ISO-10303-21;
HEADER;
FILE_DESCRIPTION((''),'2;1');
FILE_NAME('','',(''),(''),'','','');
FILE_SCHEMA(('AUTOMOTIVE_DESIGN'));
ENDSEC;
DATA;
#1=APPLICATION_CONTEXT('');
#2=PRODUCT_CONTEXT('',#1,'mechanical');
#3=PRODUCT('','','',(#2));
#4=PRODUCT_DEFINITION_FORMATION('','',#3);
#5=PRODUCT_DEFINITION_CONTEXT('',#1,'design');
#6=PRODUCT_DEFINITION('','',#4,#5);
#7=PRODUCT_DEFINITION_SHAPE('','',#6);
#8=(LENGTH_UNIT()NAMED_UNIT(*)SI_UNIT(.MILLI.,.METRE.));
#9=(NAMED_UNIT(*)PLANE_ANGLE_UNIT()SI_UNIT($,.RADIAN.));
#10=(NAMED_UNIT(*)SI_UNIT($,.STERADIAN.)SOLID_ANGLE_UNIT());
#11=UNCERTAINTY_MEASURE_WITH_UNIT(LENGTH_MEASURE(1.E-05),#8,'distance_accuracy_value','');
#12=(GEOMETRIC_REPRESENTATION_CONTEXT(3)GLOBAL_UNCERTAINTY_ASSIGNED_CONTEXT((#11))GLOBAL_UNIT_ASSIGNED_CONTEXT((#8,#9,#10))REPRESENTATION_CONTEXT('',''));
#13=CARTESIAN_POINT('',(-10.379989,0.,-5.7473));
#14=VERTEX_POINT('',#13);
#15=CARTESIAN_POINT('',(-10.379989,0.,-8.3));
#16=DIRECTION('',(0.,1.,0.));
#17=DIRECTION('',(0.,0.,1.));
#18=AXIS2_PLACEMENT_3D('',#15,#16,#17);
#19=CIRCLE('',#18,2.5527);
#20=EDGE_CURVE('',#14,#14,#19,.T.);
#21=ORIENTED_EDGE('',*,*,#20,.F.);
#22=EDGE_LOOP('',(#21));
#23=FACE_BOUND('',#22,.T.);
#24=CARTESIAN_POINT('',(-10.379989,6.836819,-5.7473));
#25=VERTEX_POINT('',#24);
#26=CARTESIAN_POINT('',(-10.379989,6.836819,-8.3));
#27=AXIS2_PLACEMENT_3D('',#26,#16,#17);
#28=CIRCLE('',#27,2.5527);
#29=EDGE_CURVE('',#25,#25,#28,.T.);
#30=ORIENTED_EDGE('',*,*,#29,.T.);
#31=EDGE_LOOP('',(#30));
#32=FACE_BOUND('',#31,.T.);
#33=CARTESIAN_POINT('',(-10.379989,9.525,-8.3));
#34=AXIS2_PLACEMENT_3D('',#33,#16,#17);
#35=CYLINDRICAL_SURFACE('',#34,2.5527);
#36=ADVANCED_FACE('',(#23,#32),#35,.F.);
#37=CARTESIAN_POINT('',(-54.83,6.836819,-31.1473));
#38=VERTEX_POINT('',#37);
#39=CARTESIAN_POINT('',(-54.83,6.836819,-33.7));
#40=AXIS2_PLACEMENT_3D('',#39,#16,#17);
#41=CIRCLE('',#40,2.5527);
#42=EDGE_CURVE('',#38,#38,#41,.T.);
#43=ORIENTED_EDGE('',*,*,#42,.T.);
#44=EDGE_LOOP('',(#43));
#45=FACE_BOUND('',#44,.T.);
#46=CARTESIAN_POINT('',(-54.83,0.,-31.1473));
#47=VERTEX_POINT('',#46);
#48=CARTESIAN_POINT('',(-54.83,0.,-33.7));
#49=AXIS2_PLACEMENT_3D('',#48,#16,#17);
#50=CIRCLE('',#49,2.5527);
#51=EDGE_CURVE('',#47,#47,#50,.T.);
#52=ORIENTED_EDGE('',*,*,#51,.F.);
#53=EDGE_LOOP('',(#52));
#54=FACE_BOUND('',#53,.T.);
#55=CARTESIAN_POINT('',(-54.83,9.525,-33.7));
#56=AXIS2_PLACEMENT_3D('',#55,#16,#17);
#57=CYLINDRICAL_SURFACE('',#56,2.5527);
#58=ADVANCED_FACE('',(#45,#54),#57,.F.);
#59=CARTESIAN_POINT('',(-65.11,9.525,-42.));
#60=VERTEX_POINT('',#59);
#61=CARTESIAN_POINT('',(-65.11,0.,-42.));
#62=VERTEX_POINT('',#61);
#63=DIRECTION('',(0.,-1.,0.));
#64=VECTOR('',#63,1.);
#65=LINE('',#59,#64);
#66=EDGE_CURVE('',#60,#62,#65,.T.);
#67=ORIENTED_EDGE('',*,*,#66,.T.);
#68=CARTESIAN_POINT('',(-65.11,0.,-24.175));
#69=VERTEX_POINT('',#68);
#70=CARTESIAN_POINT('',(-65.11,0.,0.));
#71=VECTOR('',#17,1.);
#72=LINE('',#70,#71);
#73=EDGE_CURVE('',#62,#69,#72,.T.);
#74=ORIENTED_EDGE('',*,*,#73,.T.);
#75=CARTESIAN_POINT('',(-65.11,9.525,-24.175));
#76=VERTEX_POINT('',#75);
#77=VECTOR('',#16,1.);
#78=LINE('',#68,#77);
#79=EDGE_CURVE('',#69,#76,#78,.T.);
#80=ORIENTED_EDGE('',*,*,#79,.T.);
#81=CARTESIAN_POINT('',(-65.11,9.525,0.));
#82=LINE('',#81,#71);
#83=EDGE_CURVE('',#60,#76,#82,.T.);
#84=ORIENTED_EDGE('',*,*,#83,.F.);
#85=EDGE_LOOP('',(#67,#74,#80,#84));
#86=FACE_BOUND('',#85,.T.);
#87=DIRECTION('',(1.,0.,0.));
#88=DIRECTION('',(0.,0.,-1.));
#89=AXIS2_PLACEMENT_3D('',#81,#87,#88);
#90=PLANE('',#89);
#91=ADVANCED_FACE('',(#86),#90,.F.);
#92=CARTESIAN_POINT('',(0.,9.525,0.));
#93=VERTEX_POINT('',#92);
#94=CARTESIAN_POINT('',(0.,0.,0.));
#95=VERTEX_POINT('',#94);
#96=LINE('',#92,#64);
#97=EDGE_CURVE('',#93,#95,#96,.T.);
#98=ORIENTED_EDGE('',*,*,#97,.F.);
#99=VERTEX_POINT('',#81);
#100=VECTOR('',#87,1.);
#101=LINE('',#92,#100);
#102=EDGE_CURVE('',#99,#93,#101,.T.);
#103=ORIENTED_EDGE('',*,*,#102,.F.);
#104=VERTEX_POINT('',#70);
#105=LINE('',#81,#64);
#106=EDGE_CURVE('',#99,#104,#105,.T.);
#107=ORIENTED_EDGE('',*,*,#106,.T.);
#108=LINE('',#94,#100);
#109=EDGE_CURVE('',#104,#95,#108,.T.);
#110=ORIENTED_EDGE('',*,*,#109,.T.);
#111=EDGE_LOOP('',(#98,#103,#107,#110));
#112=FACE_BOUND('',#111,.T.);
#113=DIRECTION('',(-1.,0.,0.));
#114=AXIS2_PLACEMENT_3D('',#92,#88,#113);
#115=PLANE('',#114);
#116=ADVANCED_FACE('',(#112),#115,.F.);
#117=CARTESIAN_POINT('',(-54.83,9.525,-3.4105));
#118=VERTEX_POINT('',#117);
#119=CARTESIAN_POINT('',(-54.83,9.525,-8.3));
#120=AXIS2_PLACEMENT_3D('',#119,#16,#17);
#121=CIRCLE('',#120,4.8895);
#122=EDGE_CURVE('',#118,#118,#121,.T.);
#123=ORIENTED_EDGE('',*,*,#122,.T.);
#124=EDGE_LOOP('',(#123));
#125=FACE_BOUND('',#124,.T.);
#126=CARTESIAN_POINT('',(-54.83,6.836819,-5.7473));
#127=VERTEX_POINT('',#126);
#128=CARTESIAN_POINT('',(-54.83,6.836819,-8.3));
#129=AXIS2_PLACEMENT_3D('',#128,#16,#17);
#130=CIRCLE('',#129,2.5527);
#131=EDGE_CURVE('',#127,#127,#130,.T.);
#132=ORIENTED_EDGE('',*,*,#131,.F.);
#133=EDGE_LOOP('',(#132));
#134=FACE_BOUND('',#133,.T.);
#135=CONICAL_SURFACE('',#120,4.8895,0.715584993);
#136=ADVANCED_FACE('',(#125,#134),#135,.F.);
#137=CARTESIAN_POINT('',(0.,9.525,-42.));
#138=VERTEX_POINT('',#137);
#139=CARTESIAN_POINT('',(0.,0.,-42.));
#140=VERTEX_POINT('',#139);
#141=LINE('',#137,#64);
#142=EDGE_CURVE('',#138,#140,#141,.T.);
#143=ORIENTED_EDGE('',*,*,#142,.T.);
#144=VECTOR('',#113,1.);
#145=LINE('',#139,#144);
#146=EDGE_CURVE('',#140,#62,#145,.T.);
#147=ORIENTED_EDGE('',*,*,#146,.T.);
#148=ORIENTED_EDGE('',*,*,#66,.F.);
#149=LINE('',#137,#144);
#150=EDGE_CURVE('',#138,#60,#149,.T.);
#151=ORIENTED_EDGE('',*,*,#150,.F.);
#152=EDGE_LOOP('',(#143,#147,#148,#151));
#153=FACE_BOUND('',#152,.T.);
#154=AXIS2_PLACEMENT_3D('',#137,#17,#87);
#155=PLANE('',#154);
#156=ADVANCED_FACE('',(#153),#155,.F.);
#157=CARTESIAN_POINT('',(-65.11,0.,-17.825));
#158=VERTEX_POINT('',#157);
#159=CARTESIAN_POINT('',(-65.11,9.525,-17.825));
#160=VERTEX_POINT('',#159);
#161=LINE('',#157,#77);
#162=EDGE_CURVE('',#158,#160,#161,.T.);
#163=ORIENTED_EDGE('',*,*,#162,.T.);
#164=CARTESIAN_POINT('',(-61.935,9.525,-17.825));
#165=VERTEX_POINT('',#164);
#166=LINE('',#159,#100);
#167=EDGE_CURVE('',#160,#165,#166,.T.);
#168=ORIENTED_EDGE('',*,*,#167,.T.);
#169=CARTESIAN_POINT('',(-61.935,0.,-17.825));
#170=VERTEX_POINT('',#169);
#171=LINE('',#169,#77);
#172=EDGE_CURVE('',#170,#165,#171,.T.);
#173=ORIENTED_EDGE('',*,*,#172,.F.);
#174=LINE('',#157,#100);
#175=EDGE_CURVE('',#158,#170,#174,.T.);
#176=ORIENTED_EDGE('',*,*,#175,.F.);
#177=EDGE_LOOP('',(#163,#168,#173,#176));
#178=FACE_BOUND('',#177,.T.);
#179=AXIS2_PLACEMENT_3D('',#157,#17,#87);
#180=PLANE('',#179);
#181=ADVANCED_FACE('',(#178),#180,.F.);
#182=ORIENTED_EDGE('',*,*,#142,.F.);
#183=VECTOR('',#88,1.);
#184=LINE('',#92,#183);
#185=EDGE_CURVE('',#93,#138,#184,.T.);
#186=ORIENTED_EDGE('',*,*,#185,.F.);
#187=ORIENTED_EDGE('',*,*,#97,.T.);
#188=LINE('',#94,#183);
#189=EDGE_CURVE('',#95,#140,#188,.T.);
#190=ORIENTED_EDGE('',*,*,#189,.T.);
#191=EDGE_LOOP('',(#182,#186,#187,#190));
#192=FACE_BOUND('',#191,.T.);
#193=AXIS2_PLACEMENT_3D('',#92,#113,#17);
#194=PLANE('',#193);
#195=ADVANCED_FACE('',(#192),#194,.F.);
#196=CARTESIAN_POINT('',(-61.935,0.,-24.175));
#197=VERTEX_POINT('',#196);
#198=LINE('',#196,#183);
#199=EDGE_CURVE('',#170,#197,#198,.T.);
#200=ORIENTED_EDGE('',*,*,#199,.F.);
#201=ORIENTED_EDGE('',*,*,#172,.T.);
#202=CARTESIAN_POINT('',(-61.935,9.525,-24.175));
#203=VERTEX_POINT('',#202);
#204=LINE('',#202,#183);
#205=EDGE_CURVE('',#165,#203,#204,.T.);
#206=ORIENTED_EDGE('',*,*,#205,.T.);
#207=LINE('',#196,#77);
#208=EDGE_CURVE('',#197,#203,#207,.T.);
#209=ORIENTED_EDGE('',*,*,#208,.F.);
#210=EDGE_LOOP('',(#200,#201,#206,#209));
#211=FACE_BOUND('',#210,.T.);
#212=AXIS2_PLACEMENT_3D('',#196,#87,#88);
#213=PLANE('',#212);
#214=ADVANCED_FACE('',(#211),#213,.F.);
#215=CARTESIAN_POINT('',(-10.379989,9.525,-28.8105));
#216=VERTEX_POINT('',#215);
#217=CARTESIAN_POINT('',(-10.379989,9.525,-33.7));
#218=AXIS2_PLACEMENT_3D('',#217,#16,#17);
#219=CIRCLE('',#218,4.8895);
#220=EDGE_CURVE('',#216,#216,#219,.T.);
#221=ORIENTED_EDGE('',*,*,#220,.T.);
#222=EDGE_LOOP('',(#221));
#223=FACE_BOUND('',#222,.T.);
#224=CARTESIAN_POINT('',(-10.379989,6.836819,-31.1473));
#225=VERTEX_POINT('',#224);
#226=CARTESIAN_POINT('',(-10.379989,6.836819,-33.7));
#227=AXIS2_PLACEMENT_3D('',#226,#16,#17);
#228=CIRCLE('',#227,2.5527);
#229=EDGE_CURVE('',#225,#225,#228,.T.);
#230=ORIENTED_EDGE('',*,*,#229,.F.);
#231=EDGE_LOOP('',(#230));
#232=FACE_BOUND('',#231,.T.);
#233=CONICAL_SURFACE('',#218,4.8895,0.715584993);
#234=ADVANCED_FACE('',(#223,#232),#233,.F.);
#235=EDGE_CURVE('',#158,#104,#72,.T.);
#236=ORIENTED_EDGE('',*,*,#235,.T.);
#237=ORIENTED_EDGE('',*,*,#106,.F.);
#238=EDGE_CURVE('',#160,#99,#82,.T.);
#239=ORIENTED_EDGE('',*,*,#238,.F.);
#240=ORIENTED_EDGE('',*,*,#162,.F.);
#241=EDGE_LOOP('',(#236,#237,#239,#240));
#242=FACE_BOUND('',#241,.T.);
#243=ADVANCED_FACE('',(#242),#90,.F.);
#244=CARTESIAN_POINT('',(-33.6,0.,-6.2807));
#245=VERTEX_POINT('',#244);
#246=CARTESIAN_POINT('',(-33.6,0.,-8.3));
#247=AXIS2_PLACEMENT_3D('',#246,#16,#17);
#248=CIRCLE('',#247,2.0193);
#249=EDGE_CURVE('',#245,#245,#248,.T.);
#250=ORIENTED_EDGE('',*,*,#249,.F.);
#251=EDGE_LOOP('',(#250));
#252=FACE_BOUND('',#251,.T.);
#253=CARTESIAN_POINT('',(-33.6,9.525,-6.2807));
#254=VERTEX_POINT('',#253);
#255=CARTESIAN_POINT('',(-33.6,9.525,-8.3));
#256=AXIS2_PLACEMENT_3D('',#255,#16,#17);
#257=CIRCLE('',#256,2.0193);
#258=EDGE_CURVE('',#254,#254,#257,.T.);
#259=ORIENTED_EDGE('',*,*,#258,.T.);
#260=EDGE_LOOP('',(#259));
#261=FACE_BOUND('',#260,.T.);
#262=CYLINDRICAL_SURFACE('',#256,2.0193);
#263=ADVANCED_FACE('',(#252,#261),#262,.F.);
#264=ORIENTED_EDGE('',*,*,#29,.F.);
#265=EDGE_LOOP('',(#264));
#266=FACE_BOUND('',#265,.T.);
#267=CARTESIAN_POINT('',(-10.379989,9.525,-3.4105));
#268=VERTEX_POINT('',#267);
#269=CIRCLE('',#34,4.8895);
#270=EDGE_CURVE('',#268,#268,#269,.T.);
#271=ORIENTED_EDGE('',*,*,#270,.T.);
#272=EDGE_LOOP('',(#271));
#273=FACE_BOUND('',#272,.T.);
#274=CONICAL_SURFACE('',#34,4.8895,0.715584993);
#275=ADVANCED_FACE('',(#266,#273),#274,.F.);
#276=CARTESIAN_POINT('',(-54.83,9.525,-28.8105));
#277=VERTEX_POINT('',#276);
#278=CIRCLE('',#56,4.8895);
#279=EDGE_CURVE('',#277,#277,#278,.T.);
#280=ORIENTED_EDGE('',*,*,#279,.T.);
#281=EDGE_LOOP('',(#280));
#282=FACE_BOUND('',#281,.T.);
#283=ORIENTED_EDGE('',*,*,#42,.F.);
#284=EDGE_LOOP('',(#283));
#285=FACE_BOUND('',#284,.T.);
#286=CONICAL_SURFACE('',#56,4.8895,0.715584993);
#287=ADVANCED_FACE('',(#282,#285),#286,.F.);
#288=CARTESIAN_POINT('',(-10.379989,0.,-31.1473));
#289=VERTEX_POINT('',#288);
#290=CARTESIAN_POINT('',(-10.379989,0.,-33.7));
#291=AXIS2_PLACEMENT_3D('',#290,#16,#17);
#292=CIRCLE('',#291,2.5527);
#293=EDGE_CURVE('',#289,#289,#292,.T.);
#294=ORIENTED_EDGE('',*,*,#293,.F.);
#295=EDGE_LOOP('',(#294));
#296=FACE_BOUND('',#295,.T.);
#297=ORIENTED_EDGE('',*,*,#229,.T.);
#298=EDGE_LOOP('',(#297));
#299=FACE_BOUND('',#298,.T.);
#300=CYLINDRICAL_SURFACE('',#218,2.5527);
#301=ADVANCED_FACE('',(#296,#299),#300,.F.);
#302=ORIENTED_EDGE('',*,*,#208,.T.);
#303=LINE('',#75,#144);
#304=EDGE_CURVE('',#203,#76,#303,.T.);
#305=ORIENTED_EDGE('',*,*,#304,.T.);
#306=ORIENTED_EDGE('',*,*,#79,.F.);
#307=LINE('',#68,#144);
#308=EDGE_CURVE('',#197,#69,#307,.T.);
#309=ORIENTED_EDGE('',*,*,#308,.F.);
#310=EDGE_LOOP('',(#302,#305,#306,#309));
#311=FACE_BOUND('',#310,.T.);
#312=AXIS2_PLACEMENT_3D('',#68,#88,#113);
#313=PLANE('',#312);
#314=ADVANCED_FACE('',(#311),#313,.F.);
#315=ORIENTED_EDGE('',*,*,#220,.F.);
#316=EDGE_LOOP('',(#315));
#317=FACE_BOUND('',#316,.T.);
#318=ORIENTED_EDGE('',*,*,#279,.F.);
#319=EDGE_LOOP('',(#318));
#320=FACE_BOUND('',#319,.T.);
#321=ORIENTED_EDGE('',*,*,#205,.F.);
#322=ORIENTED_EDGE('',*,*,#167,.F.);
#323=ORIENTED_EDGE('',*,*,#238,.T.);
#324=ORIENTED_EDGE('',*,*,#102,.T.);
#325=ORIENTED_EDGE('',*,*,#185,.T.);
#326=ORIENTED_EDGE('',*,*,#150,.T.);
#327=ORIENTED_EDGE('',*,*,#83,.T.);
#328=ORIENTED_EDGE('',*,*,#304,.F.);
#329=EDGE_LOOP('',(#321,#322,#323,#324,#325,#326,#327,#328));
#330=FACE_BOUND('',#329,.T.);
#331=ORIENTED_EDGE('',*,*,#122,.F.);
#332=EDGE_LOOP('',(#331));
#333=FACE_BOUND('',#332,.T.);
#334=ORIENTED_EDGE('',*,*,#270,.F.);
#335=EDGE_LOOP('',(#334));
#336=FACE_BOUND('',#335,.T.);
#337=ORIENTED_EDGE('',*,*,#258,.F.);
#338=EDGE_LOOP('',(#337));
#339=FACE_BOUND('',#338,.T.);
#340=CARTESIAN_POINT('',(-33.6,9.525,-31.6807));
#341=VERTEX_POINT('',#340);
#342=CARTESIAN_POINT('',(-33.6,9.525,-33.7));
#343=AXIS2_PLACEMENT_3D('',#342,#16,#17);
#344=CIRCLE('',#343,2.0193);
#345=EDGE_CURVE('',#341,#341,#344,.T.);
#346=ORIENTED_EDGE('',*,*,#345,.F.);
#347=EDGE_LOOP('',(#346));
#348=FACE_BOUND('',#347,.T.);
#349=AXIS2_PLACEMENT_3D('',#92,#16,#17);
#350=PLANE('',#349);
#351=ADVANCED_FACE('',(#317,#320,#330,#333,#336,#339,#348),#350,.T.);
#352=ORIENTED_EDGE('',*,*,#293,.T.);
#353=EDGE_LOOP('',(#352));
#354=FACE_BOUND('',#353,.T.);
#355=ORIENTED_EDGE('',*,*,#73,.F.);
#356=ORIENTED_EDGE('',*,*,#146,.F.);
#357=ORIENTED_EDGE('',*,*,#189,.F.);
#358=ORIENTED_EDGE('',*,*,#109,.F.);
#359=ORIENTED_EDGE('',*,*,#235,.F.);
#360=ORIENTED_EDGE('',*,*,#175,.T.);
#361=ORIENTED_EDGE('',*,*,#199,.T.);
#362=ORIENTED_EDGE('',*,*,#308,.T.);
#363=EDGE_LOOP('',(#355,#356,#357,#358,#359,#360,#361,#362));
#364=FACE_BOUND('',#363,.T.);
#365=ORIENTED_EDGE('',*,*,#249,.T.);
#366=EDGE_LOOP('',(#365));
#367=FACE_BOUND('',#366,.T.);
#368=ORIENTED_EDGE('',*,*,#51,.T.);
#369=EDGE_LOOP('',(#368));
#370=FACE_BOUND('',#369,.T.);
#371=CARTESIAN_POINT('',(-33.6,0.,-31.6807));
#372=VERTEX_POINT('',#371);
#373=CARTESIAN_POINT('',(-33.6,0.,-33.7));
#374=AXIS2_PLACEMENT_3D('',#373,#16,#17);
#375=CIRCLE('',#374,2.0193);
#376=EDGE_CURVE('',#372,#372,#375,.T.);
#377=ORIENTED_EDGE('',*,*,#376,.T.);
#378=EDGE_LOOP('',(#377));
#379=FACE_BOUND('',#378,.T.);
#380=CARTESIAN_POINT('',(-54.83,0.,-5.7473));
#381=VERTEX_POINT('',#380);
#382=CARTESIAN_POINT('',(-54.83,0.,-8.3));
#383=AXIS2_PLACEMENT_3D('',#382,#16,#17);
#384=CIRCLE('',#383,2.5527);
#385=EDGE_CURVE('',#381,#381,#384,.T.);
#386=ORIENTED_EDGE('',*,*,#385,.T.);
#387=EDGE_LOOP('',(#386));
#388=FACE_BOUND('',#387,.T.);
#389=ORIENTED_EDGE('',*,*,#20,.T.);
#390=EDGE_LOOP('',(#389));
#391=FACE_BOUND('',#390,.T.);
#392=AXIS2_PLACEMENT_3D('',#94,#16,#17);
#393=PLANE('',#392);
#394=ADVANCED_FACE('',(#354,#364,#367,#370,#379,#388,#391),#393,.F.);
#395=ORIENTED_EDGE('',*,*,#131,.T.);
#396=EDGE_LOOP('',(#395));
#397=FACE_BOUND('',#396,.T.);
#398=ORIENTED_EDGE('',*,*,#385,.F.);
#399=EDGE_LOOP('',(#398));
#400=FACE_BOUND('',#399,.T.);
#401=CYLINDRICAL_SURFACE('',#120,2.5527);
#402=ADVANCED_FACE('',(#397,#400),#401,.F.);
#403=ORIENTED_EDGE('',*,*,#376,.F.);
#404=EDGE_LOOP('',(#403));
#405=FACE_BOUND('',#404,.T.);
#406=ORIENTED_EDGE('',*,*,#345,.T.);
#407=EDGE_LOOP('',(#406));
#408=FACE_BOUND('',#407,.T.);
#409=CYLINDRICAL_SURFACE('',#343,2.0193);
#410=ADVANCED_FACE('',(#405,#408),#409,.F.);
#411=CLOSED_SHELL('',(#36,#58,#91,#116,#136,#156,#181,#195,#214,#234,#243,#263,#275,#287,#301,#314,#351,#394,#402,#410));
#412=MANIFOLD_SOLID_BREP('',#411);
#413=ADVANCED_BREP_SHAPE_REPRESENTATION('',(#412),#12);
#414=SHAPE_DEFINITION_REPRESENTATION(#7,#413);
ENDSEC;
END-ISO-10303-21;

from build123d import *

# Parameters (mm, degrees)
SKETCH2_W                                       = 65.110000082
SKETCH2_H                                       = 42
BOSS_EXTRUDE1_DEPTH                             = 9.525
CSK_FOR_10_FLAT_HEAD_MACHINE_SCREW1_D           = 5.1054
CSK_FOR_10_FLAT_HEAD_MACHINE_SCREW1_CSINK_D     = 9.779
CSK_FOR_10_FLAT_HEAD_MACHINE_SCREW1_CSINK_ANGLE = 82
SKETCH15_W                                      = 3.175
SKETCH15_H                                      = 6.35
CUT_EXTRUDE1_DEPTH                              = 79.064317942
ADVANCEDHOLE2_OUTLINE_R                         = 2.0193
ADVANCEDHOLE2_DEPTH                             = 9.525


# Read off the part's stored shape, not the designer's step: AdvancedHole2
with BuildPart() as part:
    # Sketch2 → Boss-Extrude1 (new body)
    with BuildSketch(Plane(origin=(0, 0, 0), x_dir=(1, 0, 0), z_dir=(0, 1, 0))):
        with Locations((-32.555000041, 21)):
            Rectangle(SKETCH2_W, SKETCH2_H)
    extrude(amount=BOSS_EXTRUDE1_DEPTH)

    # CSK for #10 Flat Head Machine Screw1 (through all)
    with Locations(Plane(origin=(0, 9.525, 0), x_dir=(1, 0, 0), z_dir=(0, 1, 0))):
        with Locations((-54.830000082, 33.7), (-54.830000082, 8.3), (-10.3799894, 8.3), (-10.3799894, 33.7)):
            CounterSinkHole(CSK_FOR_10_FLAT_HEAD_MACHINE_SCREW1_D / 2, CSK_FOR_10_FLAT_HEAD_MACHINE_SCREW1_CSINK_D / 2, counter_sink_angle=CSK_FOR_10_FLAT_HEAD_MACHINE_SCREW1_CSINK_ANGLE)

    # Sketch15 → Cut-Extrude1 (cut, through all)
    with BuildSketch(Plane(origin=(0, 9.525, 0), x_dir=(1, 0, 0), z_dir=(0, 1, 0))):
        with Locations((-63.522500082, 21)):
            Rectangle(SKETCH15_W, SKETCH15_H)
    extrude(amount=-CUT_EXTRUDE1_DEPTH, mode=Mode.SUBTRACT)

    # AdvancedHole2 outline → AdvancedHole2 (cut)
    with BuildSketch(Plane(origin=(0, 0, 0), x_dir=(1, 0, 0), z_dir=(0, 1, 0))):
        with Locations((-33.600000082, 8.3)):
            Circle(ADVANCEDHOLE2_OUTLINE_R)
        with Locations((-33.600000082, 33.7)):
            Circle(ADVANCEDHOLE2_OUTLINE_R)
    extrude(amount=ADVANCEDHOLE2_DEPTH, mode=Mode.SUBTRACT)


solid = part.part
